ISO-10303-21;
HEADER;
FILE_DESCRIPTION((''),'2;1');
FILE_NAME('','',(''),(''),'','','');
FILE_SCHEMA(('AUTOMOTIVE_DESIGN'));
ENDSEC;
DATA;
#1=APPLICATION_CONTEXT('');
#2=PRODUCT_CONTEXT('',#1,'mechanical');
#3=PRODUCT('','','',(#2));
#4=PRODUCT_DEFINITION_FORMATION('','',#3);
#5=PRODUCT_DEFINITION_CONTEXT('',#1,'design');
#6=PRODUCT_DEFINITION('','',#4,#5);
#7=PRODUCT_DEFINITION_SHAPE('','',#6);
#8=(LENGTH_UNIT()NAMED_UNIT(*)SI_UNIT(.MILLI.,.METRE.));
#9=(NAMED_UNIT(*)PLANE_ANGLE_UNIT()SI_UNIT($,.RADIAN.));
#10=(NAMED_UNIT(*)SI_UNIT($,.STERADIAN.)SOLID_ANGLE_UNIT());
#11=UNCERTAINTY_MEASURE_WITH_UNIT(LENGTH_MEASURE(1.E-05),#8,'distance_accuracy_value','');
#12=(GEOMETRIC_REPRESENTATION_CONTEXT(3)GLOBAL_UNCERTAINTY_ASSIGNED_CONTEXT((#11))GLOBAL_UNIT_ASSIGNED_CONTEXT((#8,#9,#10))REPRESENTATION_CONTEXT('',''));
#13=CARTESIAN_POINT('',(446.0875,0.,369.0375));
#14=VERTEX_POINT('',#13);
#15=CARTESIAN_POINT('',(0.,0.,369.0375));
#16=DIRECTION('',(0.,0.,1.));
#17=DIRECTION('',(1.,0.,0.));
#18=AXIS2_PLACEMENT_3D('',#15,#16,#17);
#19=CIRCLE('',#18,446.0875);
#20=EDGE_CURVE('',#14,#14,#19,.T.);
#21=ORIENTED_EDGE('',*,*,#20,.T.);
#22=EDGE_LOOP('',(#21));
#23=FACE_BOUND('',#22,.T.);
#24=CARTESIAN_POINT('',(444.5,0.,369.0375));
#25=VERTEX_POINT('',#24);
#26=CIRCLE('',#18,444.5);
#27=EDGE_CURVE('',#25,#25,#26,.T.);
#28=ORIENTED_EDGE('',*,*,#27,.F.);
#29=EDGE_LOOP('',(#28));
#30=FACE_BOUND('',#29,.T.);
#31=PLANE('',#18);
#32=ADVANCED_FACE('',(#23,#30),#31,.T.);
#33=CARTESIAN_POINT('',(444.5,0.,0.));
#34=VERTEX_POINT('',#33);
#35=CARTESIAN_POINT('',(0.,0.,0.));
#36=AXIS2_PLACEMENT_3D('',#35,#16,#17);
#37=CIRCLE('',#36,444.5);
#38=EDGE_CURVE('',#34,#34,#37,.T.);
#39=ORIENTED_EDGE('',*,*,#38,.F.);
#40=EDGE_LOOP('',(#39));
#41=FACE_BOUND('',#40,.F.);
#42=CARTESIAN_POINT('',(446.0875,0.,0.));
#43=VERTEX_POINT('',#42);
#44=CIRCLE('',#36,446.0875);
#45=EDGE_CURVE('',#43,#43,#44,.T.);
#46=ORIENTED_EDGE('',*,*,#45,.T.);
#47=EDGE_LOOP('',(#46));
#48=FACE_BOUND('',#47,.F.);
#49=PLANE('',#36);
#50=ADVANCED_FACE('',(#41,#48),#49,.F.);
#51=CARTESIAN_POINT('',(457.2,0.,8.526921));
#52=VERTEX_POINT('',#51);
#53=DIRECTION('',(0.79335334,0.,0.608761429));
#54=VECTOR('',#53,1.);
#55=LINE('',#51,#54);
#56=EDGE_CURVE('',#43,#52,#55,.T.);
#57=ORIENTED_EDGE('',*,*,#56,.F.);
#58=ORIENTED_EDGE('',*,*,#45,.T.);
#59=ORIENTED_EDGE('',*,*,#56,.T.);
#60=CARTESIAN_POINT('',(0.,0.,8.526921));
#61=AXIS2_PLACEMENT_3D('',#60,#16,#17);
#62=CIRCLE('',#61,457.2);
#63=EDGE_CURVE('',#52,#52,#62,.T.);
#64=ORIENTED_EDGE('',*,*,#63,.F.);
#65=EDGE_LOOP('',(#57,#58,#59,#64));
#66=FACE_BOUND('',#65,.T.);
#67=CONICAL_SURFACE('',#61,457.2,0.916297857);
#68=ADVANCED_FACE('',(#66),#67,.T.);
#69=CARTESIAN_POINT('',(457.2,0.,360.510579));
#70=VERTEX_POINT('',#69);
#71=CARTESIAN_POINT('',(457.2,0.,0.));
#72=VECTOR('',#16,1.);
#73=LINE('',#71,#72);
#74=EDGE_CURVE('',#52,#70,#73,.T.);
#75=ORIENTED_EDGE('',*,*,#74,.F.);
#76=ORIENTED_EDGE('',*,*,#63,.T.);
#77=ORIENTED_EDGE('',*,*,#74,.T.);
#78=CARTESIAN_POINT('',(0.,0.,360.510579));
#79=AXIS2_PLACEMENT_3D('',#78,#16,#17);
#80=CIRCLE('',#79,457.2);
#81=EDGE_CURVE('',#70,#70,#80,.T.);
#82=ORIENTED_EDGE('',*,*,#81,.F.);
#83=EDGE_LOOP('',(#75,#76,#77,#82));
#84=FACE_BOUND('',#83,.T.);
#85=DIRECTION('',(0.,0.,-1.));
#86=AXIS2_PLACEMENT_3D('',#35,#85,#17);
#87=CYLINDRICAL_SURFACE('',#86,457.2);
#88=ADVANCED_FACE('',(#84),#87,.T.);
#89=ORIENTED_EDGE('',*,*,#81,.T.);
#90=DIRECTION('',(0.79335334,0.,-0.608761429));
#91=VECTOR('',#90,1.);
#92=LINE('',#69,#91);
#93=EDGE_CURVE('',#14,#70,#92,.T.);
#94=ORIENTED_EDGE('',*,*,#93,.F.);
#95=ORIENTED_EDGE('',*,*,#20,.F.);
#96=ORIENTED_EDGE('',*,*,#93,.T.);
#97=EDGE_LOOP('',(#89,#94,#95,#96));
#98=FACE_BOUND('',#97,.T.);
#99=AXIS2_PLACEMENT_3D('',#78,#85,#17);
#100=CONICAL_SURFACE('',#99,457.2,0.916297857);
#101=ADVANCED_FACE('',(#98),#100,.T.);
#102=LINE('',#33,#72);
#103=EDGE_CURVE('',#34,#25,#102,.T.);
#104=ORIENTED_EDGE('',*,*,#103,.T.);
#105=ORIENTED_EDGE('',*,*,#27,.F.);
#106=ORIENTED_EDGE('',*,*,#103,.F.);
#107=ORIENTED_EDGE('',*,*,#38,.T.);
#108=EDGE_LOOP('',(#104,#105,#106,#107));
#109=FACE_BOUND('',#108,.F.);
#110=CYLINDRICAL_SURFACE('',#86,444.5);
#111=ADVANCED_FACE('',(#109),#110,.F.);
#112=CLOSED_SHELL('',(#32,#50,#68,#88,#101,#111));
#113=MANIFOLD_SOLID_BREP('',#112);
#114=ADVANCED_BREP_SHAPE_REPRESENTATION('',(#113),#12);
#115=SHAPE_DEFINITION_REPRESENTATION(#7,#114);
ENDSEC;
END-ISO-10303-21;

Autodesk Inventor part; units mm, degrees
ref_plane "YZ Plane" through (0, 0, 0) normal (1, 0, 0) x (0, 1, 0)
ref_plane "XZ Plane" through (0, 0, 0) normal (0, 1, 0) x (-1, 0, 0)
ref_plane "XY Plane" through (0, 0, 0) normal (0, 0, 1) x (1, 0, 0)
sketch "Sketch1" plane through (0, 0, 0) normal (0, 0, 1) x (1, 0, 0)
  circle A0 centre (0, 0) radius 457.2
  circle A1 centre (0, 0) radius 444.5
  dimension "d0" = 914.4
  dimension "d1" = 889
extrude "Extrusion1" add sketch "Sketch1" along normal blind 369.0375
chamfer "Chamfer1" distance 11.1125 angle 37.5 1 edges at (-457.2, 0, 0) measured on face at (-448.3191, -14.9353, 0)
chamfer "Chamfer2" distance 11.1125 angle 37.5 1 edges at (-457.2, 0, 369.0375) measured on face at (-448.3191, -14.9353, 369.0375)
equation "\"d7\" = d4"
equation "\"d9\" = d6"
equation "\"d4\" = 11.1125"
equation "\"d6\" = 37.5deg"
properties part number "A1-19027-100-02 36in pipe" material "Steel, Mild"
